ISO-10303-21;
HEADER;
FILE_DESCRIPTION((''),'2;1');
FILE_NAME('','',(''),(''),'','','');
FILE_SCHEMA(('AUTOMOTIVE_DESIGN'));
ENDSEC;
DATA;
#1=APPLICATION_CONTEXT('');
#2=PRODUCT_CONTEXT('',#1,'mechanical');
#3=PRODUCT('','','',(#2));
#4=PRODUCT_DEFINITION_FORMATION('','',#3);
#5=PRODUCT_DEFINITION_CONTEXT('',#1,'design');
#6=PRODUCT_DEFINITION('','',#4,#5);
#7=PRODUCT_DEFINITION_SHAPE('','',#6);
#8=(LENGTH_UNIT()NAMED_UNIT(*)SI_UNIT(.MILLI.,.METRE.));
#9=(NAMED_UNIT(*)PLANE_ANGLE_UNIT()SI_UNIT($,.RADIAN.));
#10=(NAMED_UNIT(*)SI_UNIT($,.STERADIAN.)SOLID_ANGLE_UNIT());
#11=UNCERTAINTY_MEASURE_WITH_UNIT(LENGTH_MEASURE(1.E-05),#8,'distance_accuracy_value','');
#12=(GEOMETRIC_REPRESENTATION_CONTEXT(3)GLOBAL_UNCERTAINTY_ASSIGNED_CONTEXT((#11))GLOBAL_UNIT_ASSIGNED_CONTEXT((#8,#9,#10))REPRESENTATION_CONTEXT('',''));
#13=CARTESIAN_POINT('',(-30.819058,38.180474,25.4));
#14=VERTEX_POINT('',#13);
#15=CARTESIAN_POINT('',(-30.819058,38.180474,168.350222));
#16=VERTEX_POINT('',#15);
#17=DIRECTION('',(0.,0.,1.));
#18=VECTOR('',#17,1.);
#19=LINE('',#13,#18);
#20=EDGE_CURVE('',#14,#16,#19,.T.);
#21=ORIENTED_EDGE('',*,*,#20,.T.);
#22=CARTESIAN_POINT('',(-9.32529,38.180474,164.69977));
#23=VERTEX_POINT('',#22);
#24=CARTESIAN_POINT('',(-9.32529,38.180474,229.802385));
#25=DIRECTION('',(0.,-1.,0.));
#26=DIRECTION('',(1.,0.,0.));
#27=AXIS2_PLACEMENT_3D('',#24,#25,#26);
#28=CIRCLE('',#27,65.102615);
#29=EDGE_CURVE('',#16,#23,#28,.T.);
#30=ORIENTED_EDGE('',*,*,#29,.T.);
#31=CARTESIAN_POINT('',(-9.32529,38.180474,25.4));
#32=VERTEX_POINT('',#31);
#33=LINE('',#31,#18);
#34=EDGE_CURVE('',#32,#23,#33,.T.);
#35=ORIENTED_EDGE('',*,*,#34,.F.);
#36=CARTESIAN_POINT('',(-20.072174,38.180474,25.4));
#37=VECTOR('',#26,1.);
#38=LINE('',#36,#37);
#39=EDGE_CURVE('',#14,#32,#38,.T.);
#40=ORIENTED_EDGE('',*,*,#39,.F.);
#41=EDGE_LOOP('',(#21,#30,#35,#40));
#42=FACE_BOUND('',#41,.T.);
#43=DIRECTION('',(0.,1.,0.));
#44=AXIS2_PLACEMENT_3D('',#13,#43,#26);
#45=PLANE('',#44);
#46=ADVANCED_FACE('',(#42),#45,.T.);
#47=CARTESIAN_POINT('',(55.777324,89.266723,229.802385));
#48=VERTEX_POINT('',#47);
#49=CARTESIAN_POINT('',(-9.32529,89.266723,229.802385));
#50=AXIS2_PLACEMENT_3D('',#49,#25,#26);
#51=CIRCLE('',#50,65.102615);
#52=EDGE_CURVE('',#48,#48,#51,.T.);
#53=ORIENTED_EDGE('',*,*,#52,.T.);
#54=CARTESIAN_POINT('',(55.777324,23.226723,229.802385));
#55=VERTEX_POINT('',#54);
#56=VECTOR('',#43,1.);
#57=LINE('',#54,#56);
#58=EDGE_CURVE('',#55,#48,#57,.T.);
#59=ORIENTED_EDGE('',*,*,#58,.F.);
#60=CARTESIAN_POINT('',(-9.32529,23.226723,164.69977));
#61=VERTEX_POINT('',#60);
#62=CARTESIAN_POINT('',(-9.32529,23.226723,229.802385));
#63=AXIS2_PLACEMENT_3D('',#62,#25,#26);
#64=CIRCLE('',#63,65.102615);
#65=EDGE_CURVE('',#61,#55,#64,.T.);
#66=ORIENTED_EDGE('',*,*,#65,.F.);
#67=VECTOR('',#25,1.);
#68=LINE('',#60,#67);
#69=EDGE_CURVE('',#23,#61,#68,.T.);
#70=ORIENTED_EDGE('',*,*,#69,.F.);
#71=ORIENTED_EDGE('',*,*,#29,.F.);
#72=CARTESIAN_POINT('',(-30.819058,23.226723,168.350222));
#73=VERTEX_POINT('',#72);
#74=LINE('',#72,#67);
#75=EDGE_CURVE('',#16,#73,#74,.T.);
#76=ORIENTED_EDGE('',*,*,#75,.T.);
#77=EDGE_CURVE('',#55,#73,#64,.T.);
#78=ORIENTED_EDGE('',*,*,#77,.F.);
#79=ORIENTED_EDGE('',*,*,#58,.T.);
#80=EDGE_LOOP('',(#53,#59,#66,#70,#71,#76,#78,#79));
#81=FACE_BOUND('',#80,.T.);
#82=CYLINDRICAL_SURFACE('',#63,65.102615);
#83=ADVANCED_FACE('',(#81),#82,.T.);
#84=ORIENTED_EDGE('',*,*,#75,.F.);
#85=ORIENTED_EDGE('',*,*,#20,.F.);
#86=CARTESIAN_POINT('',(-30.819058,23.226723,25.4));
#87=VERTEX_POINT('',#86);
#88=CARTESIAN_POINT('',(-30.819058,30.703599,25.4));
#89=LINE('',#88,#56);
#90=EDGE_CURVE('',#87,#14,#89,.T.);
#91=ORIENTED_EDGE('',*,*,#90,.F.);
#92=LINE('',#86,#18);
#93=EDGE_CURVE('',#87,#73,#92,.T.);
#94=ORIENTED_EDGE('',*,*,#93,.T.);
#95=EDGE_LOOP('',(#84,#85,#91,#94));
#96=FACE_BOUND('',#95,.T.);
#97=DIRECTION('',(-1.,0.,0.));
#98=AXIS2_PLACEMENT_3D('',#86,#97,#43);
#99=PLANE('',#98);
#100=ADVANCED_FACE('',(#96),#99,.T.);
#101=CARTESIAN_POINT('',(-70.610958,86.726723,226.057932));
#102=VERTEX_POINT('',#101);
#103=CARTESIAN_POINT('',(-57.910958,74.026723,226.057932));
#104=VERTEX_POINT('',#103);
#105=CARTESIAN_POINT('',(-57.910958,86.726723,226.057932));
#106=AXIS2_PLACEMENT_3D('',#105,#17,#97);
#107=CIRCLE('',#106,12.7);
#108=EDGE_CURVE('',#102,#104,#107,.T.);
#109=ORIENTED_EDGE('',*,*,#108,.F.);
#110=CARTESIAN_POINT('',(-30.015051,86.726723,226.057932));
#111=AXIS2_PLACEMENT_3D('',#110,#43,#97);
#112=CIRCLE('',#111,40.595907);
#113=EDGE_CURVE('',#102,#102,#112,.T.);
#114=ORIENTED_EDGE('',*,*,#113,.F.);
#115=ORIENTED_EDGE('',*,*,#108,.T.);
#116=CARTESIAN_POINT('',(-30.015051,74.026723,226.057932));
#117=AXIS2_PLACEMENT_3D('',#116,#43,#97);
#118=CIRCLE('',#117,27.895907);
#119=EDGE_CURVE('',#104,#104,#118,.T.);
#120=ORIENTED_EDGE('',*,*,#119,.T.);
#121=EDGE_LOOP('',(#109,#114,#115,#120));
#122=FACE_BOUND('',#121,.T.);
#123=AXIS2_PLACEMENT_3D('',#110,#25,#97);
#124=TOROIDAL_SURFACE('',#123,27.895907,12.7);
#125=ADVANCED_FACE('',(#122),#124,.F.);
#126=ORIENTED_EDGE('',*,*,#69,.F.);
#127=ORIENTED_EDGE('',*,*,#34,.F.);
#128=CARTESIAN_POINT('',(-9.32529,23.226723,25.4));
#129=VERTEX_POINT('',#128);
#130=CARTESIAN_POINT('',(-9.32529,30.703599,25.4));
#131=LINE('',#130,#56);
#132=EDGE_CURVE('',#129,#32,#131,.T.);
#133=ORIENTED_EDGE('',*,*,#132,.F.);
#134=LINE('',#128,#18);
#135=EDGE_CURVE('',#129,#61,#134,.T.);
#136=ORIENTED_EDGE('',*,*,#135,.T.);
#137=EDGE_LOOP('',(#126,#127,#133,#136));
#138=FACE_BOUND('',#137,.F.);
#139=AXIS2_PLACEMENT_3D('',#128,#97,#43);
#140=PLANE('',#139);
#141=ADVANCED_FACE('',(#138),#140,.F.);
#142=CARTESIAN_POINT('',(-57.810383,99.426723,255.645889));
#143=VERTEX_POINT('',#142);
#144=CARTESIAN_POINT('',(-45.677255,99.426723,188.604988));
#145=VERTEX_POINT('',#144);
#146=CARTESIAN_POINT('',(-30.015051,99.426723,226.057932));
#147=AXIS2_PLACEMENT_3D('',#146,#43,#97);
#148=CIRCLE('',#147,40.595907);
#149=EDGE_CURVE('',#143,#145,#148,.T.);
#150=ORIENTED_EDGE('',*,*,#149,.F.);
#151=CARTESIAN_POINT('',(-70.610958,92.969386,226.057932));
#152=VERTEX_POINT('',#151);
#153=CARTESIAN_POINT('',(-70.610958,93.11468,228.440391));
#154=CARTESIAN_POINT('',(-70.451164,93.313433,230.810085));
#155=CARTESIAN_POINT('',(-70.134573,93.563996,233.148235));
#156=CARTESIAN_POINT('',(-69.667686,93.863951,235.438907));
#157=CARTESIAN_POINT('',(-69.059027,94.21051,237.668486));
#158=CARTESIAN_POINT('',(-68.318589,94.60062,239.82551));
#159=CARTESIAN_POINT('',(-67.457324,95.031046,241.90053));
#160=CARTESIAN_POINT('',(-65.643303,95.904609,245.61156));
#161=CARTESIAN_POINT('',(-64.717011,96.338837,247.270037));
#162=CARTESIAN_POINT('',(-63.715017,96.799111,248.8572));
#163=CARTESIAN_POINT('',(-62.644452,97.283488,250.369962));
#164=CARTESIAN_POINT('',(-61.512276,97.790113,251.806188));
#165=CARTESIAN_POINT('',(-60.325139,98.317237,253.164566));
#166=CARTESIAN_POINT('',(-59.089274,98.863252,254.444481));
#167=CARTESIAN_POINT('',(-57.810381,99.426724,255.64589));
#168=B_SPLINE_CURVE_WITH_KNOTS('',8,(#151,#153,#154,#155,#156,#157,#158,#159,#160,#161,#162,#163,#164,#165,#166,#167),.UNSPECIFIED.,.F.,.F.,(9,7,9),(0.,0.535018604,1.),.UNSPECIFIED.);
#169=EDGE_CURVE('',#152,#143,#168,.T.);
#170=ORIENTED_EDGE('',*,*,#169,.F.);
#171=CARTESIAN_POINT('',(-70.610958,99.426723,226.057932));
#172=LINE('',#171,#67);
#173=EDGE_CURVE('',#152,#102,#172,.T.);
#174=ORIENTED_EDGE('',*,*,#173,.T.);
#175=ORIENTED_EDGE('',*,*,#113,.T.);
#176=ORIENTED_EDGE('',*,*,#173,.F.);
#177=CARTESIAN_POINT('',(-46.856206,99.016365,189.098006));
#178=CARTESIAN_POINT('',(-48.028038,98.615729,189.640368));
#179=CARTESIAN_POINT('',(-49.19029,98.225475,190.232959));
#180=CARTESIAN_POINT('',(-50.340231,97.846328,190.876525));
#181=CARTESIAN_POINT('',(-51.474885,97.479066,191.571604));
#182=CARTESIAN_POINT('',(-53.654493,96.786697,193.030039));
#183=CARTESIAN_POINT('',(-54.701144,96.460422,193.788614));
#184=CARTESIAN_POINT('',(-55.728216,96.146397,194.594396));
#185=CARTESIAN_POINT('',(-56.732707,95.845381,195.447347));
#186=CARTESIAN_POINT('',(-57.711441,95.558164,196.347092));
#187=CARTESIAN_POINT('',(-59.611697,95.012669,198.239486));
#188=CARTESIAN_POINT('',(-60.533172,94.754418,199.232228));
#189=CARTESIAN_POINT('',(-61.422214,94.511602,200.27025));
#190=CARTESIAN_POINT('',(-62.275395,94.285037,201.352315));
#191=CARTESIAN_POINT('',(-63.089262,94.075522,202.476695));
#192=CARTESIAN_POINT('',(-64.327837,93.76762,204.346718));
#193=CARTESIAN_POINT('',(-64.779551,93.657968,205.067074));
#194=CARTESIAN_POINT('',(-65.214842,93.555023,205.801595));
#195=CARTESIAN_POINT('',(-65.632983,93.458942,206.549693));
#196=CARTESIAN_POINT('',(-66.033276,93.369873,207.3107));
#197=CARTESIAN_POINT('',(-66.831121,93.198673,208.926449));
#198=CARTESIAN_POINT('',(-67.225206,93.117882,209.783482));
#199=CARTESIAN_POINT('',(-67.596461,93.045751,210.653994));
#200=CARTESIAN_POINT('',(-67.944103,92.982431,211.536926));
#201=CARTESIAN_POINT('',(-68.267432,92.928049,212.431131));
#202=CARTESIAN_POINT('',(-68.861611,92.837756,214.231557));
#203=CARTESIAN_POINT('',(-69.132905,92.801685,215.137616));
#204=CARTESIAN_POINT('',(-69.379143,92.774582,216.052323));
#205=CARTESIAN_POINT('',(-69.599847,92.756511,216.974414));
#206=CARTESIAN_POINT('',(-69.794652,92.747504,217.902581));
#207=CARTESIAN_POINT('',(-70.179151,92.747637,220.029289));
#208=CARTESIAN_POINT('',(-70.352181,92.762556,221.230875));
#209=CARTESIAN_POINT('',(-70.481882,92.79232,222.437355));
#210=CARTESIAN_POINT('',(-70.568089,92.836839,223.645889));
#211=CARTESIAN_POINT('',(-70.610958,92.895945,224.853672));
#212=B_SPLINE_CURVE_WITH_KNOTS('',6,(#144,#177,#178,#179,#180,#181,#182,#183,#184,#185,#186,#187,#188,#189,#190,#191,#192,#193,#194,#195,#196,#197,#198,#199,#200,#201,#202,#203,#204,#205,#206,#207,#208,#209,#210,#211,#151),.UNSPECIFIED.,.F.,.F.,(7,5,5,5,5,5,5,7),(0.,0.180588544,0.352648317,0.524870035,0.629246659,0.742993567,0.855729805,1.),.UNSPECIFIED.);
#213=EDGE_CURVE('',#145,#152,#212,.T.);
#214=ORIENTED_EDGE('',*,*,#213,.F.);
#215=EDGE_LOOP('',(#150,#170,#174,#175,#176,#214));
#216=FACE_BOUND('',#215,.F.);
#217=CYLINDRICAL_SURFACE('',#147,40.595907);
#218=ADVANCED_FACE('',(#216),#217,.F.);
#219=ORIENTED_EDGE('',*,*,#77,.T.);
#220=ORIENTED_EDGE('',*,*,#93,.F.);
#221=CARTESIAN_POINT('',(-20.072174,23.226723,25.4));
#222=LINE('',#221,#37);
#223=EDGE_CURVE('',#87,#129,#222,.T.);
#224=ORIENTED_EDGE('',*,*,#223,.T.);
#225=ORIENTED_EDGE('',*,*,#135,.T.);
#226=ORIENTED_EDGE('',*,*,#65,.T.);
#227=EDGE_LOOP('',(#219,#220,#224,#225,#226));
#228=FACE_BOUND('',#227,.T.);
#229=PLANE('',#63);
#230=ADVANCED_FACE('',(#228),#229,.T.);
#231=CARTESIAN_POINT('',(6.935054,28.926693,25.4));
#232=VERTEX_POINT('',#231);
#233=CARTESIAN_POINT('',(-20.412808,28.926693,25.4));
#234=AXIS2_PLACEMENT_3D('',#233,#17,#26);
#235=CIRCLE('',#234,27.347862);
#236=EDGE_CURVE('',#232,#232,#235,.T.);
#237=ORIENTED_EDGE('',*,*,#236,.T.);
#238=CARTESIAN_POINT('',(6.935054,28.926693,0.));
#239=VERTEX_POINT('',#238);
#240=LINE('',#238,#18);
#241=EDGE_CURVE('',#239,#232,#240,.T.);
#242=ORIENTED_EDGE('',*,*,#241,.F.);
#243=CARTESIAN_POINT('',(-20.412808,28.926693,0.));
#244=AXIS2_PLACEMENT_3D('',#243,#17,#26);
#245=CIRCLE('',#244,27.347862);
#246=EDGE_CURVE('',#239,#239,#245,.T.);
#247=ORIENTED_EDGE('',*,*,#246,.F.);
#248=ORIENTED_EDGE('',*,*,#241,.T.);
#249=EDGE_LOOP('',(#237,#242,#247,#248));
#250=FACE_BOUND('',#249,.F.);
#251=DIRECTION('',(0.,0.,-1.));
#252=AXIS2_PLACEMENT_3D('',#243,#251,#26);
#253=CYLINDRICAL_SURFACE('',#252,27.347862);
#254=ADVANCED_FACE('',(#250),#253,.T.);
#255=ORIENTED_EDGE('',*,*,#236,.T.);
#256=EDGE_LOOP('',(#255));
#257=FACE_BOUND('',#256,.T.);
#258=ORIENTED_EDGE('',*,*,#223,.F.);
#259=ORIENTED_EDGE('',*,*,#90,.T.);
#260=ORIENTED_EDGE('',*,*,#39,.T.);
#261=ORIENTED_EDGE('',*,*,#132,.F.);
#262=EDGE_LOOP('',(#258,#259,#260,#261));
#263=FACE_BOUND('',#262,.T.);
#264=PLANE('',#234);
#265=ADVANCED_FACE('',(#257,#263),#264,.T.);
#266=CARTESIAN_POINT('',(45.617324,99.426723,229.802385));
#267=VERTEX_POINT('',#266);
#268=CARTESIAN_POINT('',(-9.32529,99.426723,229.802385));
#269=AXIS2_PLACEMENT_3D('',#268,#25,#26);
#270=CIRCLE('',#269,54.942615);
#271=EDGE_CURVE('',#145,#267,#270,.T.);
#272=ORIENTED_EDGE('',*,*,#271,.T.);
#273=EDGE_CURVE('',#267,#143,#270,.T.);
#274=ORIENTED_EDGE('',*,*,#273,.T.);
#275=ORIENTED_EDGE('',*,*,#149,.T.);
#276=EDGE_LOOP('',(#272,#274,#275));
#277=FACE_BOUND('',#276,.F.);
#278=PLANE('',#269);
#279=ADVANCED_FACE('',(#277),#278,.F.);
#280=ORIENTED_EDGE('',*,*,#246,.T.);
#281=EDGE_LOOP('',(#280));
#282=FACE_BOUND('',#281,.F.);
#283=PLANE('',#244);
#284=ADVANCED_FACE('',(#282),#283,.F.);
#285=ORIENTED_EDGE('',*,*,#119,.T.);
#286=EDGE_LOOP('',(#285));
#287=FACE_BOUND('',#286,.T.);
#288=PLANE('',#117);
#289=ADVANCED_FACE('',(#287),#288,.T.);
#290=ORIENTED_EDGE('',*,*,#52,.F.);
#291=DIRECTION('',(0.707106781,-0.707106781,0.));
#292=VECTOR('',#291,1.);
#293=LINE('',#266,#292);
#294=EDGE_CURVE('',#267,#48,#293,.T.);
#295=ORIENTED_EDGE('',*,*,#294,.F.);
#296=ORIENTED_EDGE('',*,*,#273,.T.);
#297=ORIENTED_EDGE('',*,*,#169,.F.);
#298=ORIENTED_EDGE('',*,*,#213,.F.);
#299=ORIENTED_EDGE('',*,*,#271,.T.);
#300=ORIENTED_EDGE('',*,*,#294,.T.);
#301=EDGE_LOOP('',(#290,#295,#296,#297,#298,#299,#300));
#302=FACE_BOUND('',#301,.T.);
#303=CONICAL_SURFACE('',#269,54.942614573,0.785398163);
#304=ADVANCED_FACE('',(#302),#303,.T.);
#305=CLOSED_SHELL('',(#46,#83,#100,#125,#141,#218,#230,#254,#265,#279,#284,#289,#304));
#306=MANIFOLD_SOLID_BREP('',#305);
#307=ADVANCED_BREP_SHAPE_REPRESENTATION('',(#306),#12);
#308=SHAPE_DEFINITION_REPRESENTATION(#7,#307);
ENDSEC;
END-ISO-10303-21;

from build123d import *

# Parameters (mm, degrees)
F0_R     = 27.3478618837
F1_DEPTH = 25.4
F2_W     = 21.4937683195
F2_H     = 14.953751117
F3_DEPTH = 228.6
F4_R     = 65.1026145731
F5_DEPTH = 76.2
F6_R     = 40.595906751
F7_DEPTH = 25.4
F8_R     = 12.7


# Not quite as in the source:
# - a fillet or chamfer that OpenCascade refuses, or shapes differently, is made with other operations: its cross-section is extruded or revolved along the edge and cut away or added


with BuildPart() as f1:
    # F0 (on Top) → F1 (new body)
    with BuildSketch(Plane.XY):
        with Locations((-20.4128082842, 28.926692903)):
            Circle(F0_R)
    extrude(amount=F1_DEPTH)

    # F2 (on face) → F3 (join)
    with BuildSketch(Plane.XY.offset(25.4)):
        with Locations((-20.0721742585, 30.7035986334)):
            Rectangle(F2_W, F2_H)
    extrude(amount=F3_DEPTH)

    # F4 (on face) → F5 (join)
    with BuildSketch(Plane.XZ.offset(-23.2267230749)):
        with Locations((-9.3252900988, 229.8023849726)):
            Circle(F4_R)
    extrude(amount=-F5_DEPTH)

    # F6 (on face) → F7 (cut)
    with BuildSketch(Plane(origin=(0, 99.4267230749, 0), x_dir=(-1, 0, 0), z_dir=(0, 1, 0))):
        with Locations((30.0150513649, 226.0579317808)):
            Circle(F6_R)
    extrude(amount=-F7_DEPTH, mode=Mode.SUBTRACT)

    # F8
    f8_edges = [f1.edges().sort_by_distance(p)[0] for p in [
        (10.580855, 74.026723, 226.057932),
    ]]
    fillet(f8_edges, radius=F8_R)

    # F9: chamfer of 10.16 on 1 edges, made by hand

    # F9_s1 → F9_t2 (revolve, cut)
    with BuildSketch(Plane.XY.offset(229.8023849726)):
        Polygon((45.6173244743, 99.4267230749), (55.7773244743, 89.2667230749), (55.7773244743, 99.4267230749), align=None)
    revolve(axis=Axis((-9.3252900988, 99.4267230749, 229.8023849726), (0, -1, 0)), mode=Mode.SUBTRACT)


solid = f1.part
